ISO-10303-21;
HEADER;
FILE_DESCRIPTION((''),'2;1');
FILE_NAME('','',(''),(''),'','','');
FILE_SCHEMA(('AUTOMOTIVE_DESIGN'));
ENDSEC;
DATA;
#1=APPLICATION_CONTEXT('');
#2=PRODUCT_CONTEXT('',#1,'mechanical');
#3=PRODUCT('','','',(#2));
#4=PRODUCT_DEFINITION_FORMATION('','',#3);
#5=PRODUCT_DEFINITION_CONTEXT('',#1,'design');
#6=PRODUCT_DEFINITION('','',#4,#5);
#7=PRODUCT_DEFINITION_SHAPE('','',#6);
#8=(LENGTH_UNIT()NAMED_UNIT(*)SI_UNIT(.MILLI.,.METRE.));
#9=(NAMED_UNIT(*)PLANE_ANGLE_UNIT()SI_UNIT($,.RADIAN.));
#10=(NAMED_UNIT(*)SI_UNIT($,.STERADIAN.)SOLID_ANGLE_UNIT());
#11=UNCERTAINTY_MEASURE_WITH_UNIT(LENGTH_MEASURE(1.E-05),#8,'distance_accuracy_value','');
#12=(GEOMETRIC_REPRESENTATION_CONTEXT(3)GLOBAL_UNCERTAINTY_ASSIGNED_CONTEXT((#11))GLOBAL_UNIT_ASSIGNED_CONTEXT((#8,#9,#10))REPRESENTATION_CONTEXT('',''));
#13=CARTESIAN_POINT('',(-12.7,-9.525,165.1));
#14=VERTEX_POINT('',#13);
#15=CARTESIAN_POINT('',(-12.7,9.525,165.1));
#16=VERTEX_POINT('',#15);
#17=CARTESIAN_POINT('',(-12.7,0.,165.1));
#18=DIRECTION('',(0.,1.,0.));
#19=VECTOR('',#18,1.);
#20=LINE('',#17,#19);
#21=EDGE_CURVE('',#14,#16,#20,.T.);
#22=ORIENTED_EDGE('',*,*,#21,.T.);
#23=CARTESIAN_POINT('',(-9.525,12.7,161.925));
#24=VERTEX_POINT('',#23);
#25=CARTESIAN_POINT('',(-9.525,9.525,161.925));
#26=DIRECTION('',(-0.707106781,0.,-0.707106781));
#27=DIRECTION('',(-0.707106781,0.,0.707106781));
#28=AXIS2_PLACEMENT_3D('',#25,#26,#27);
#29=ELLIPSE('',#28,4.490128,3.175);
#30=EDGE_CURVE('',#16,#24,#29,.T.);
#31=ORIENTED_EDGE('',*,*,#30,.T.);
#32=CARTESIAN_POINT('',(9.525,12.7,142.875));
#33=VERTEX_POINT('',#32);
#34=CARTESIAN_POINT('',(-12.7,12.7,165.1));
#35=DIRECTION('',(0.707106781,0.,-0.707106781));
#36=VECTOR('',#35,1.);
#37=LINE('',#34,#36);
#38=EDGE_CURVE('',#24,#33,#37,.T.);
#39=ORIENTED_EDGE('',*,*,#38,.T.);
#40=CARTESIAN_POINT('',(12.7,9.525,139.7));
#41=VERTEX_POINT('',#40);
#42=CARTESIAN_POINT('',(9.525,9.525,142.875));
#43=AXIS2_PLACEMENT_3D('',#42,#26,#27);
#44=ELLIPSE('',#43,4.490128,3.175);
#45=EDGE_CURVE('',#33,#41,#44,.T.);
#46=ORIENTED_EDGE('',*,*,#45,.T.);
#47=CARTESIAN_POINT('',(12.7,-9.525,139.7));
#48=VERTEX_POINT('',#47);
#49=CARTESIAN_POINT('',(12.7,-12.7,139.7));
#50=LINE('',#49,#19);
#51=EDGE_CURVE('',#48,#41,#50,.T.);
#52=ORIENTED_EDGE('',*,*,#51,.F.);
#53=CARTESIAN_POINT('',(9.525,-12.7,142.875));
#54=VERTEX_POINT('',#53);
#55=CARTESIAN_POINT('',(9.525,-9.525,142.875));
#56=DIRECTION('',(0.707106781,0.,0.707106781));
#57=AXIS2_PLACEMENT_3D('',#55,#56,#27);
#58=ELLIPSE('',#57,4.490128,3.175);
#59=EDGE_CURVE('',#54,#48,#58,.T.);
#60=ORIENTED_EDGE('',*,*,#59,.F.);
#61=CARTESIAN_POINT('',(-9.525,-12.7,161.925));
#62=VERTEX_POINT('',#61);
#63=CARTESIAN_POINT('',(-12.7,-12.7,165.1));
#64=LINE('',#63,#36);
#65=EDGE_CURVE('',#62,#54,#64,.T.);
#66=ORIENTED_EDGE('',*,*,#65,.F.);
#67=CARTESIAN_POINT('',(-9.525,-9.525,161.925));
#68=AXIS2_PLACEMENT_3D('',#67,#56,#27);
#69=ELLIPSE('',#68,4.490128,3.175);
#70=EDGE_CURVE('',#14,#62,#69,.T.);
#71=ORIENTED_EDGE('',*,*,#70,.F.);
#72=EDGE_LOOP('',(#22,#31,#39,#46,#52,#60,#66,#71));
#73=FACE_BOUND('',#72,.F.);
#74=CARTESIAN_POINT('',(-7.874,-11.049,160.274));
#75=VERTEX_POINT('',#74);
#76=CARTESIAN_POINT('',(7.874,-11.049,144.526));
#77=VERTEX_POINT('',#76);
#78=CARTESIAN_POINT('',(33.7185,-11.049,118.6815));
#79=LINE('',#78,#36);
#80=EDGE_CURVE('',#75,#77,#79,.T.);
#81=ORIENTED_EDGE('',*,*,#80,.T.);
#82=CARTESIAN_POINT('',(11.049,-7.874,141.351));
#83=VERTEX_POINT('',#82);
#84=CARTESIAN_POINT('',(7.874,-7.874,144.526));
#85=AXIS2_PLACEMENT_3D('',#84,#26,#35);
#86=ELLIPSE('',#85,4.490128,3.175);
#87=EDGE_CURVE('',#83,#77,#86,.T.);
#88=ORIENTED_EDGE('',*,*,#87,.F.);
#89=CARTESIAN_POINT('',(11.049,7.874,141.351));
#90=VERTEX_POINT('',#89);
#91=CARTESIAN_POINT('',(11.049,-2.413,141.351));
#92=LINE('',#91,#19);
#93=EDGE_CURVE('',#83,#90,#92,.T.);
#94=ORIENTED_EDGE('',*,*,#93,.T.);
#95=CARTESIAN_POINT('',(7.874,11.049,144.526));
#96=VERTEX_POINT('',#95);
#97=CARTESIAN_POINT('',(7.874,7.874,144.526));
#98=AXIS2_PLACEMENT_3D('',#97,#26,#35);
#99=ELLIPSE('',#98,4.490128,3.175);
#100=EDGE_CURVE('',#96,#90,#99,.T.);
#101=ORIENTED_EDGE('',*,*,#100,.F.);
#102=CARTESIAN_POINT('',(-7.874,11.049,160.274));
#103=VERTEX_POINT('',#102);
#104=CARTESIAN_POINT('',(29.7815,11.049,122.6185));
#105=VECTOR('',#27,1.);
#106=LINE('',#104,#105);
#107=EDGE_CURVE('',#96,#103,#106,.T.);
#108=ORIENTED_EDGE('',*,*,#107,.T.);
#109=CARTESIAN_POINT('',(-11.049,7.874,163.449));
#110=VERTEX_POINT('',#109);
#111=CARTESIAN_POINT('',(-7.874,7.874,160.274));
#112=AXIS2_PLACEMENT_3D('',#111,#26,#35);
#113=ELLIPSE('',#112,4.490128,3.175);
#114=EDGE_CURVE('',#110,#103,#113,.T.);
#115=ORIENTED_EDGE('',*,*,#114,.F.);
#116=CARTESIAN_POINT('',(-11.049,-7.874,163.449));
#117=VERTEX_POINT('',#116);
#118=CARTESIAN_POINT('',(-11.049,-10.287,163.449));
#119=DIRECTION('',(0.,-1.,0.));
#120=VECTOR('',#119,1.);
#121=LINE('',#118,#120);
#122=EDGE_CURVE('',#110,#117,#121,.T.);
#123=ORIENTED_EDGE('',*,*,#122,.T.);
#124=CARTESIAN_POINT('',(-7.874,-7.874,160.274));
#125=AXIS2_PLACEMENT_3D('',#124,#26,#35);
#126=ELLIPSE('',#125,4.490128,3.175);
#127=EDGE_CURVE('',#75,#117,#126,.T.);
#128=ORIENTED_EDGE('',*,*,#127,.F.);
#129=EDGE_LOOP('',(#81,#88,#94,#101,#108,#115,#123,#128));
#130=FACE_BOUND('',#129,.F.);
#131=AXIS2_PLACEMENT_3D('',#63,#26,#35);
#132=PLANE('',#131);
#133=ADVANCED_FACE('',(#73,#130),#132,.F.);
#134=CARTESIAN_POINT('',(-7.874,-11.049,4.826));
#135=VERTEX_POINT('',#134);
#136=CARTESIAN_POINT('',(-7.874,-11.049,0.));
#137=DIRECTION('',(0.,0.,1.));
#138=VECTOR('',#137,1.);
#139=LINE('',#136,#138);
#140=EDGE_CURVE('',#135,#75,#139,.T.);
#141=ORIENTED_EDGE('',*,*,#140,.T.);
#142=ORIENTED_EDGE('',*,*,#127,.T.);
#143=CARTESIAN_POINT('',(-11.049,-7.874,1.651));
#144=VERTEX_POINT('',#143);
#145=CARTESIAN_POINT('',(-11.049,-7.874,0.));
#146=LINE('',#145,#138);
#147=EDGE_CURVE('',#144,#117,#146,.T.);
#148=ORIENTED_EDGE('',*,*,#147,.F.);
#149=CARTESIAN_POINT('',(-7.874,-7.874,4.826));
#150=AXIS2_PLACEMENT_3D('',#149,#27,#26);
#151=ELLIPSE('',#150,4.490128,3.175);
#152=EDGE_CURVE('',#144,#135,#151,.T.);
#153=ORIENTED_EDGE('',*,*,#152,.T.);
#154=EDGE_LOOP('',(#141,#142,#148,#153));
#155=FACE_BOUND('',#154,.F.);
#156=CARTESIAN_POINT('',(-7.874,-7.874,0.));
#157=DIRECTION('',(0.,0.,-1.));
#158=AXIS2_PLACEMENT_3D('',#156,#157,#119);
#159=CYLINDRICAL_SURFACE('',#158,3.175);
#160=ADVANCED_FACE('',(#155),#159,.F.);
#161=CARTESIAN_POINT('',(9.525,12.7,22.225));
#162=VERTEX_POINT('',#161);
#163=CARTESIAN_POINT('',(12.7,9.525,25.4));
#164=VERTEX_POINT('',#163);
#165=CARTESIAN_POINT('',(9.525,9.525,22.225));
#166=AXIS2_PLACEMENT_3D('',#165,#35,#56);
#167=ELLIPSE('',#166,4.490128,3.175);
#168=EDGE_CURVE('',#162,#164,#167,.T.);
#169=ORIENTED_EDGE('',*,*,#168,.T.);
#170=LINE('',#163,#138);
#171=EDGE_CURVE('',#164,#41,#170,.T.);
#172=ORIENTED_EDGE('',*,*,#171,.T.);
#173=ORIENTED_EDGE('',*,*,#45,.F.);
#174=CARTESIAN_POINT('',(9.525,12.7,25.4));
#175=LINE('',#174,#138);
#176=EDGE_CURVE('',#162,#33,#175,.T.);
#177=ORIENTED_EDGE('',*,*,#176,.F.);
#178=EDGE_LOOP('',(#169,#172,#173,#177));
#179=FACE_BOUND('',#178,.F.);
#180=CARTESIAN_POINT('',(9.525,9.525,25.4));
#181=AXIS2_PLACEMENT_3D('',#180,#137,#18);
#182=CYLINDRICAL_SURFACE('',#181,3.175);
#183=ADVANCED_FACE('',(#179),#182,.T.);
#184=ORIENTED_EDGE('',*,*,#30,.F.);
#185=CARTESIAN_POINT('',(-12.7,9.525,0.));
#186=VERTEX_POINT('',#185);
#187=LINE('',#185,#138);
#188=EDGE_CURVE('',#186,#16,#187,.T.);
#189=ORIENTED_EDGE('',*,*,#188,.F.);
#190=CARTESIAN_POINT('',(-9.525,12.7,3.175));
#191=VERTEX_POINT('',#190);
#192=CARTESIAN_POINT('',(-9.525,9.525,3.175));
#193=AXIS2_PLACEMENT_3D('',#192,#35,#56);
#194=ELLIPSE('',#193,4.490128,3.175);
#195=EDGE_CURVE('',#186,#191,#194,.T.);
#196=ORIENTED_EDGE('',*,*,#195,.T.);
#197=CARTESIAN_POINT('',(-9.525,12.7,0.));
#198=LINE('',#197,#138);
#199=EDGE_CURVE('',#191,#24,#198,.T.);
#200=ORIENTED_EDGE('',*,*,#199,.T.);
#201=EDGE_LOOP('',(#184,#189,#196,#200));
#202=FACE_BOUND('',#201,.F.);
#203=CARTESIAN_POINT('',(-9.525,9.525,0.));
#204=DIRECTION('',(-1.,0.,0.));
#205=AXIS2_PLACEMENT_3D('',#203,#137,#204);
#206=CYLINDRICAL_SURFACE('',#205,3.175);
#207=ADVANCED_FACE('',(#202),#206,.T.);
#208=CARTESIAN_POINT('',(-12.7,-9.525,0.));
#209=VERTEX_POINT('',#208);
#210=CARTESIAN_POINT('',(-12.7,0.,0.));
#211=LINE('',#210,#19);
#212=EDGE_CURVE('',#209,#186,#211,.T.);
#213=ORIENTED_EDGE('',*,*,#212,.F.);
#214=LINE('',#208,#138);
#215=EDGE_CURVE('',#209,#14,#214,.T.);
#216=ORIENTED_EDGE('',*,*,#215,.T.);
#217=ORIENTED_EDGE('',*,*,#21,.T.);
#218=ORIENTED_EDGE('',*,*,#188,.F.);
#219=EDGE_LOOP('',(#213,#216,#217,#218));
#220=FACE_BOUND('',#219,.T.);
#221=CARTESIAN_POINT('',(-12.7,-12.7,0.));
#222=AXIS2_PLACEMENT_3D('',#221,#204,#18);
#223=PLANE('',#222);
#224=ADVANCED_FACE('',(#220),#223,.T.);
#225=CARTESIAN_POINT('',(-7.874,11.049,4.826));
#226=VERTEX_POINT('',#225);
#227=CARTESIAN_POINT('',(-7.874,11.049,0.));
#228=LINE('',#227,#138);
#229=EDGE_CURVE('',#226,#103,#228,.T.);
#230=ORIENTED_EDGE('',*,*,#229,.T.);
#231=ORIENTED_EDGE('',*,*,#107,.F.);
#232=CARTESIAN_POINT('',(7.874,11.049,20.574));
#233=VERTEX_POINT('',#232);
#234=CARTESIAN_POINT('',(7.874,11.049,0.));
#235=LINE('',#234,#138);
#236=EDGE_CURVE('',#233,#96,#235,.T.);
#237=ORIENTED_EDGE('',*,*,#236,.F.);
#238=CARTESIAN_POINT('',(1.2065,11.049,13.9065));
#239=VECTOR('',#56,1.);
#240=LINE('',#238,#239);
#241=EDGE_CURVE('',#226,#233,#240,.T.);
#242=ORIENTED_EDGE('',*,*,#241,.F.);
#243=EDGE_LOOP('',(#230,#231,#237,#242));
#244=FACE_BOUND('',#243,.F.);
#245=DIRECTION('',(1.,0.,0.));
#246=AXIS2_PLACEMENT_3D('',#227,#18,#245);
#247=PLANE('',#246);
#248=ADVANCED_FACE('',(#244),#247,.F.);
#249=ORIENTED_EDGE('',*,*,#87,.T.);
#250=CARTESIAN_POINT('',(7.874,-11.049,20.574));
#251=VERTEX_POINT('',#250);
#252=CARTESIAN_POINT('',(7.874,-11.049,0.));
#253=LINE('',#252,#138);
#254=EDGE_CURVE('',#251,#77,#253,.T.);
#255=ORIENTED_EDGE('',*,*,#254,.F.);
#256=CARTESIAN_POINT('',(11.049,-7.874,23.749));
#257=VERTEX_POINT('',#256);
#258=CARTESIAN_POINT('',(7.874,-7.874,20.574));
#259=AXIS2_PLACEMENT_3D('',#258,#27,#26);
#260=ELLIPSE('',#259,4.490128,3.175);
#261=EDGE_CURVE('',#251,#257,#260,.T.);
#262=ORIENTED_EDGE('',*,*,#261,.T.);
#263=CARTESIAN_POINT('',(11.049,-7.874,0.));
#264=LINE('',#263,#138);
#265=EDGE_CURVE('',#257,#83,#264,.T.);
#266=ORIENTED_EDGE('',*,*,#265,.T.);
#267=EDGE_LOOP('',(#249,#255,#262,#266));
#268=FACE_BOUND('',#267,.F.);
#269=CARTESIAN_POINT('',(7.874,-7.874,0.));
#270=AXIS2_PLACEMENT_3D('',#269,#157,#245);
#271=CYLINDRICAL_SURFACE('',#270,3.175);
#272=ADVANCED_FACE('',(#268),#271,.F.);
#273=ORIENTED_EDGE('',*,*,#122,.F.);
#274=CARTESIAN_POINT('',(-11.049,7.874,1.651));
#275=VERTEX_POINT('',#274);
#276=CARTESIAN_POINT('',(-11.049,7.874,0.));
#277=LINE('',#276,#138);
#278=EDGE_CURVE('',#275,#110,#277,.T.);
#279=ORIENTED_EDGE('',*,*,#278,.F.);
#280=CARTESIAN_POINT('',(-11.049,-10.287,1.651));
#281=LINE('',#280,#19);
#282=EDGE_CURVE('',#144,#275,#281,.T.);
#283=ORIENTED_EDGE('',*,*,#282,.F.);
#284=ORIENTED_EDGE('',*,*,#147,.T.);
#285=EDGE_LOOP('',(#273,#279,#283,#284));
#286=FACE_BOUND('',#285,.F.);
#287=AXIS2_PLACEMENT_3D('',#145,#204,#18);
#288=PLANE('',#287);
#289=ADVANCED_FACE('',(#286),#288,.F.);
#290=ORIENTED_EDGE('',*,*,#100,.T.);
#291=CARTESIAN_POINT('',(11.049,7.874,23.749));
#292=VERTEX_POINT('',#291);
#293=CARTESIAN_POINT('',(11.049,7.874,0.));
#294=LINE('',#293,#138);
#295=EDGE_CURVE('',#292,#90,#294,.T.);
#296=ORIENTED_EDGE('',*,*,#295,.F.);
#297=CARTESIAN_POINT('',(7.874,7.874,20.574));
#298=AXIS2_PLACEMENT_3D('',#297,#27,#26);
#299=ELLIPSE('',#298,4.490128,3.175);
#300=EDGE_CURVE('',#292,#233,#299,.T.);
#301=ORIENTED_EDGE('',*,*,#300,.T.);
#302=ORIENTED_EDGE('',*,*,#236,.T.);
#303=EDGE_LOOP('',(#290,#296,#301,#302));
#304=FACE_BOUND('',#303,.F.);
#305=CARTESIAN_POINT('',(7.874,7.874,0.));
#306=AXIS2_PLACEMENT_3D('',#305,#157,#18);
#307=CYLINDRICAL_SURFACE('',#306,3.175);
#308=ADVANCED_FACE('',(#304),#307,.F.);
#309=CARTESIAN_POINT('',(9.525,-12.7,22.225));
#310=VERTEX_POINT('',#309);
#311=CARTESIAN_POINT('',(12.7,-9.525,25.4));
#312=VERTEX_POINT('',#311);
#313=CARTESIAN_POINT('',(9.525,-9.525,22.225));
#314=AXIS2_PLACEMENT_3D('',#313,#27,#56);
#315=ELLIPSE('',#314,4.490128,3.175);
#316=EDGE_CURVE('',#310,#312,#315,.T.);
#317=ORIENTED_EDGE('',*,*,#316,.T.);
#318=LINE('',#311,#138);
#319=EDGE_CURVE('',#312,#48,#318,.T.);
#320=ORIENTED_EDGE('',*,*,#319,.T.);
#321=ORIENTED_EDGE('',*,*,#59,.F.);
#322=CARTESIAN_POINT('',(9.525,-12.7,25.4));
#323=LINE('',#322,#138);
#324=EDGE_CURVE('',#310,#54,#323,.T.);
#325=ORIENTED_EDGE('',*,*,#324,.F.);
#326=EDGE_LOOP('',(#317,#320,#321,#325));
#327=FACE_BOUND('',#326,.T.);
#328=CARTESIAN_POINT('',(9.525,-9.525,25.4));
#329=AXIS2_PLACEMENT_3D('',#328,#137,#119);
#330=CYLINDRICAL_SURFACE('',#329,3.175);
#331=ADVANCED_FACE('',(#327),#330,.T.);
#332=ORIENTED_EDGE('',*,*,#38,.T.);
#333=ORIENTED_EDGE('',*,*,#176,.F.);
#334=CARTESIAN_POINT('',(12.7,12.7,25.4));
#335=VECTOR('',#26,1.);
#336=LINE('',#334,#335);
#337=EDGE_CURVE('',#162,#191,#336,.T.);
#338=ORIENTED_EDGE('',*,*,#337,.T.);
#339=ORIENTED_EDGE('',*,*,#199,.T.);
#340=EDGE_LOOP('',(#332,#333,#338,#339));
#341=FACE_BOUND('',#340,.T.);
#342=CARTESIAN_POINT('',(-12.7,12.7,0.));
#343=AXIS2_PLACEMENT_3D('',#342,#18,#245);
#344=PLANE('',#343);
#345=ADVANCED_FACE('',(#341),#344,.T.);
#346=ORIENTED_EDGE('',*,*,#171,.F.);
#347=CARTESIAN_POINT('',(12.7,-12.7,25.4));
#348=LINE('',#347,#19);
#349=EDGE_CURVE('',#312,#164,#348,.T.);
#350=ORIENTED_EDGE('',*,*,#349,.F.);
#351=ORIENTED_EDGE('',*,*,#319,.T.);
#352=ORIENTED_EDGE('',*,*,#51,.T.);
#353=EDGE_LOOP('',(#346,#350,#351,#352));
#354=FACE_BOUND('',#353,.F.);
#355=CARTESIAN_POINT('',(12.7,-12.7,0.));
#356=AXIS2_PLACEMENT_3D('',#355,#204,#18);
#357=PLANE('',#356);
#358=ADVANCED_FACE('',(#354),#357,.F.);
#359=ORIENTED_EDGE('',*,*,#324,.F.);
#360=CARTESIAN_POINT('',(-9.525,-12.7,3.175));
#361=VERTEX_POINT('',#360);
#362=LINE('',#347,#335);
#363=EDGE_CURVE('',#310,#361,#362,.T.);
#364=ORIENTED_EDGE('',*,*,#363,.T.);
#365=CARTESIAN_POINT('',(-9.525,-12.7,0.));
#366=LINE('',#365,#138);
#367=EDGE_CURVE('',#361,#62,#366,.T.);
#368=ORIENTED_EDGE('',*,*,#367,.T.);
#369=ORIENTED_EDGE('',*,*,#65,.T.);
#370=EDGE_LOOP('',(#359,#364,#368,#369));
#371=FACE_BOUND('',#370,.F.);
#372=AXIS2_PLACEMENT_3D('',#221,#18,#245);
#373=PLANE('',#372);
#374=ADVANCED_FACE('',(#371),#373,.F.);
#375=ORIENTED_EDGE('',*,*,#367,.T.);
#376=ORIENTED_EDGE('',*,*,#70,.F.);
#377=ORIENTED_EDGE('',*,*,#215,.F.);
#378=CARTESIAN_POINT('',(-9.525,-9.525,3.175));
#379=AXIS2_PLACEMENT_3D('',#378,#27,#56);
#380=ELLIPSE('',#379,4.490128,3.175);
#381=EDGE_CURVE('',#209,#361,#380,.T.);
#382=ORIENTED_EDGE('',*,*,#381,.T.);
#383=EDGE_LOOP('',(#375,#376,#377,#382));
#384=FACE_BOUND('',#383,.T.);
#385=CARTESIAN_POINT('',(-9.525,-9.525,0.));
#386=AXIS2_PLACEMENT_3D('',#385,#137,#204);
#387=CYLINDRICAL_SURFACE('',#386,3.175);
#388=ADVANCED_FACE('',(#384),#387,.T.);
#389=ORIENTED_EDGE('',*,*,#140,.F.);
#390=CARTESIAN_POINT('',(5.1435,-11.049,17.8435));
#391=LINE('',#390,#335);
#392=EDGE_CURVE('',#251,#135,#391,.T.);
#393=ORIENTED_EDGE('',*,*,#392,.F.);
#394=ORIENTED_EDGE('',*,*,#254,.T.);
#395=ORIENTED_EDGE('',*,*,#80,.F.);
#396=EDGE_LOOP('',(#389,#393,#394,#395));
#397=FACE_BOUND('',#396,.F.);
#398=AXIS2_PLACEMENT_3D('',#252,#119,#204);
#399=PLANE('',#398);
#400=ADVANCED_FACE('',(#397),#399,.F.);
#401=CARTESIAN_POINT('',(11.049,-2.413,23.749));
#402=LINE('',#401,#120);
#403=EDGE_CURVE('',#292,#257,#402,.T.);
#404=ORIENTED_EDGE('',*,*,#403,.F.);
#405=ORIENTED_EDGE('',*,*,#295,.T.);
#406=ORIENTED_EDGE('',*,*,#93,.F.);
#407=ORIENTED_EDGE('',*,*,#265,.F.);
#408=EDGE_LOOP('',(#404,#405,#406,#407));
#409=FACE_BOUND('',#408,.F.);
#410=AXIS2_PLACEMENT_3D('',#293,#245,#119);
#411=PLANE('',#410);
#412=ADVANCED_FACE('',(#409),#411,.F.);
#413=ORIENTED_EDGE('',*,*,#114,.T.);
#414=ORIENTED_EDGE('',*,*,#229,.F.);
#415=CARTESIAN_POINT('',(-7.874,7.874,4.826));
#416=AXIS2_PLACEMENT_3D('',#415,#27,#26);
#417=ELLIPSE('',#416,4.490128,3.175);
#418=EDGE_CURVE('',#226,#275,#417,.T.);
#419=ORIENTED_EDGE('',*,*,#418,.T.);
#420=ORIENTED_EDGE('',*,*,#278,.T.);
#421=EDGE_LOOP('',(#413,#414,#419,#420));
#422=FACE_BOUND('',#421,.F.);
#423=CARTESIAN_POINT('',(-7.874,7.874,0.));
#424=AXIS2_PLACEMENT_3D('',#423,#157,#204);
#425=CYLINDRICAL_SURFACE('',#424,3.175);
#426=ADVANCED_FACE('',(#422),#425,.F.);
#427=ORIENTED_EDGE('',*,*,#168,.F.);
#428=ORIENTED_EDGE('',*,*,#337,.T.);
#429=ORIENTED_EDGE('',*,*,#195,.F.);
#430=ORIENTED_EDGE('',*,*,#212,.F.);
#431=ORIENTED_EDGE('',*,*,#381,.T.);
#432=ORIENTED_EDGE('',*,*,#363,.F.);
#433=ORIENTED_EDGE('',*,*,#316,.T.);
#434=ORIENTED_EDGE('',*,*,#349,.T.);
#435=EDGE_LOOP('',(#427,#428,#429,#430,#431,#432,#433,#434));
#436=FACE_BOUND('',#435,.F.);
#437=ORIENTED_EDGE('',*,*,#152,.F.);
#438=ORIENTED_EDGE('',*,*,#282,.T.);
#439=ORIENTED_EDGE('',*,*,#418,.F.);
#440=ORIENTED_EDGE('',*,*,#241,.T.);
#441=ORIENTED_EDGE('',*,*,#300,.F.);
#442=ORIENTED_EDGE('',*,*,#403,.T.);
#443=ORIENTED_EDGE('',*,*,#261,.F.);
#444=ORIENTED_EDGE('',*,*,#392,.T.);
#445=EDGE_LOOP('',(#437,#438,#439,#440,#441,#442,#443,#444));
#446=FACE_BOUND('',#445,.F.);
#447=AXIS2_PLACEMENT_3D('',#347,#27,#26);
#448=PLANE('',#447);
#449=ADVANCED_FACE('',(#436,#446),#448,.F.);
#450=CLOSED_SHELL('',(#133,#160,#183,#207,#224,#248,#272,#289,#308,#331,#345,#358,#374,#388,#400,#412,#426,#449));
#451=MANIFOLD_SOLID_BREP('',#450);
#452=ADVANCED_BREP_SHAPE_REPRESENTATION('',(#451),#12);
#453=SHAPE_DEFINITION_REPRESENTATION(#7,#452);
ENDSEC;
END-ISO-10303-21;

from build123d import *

# Parameters (mm, degrees)
F1_W     = 25.4
F1_H     = 25.4
F2_DEPTH = 165.1
F4_DEPTH = 25.4
F5_R     = 3.175


# Not quite as in the source:
# - a variable given as a bare number and used for a length is read in inches; the dataset says mm whatever the document's units were


with BuildPart() as f2:
    # F1 (on Top) → F2 (new body)
    with BuildSketch(Plane.XY):
        Rectangle(F1_W, F1_H)
        with BuildLine():
            ThreePointArc((-11.049, 7.874), (-10.1190640303, 10.1190640303), (-7.874, 11.049))
            Line((-7.874, 11.049), (7.874, 11.049))
            ThreePointArc((7.874, 11.049), (10.1190640303, 10.1190640303), (11.049, 7.874))
            Line((11.049, 7.874), (11.049, -7.874))
            ThreePointArc((11.049, -7.874), (10.1190640303, -10.1190640303), (7.874, -11.049))
            Line((7.874, -11.049), (-7.874, -11.049))
            ThreePointArc((-7.874, -11.049), (-10.1190640303, -10.1190640303), (-11.049, -7.874))
            Line((-11.049, -7.874), (-11.049, 7.874))
        make_face(mode=Mode.SUBTRACT)
    extrude(amount=F2_DEPTH)

    # F3 (on face) → F4 (cut)
    with BuildSketch(Plane.XZ.offset(12.7)):
        Polygon((12.7, 25.4), (-12.7, 0), (12.7, 0), align=None)
        Polygon((12.7, 165.1), (-12.7, 165.1), (12.7, 139.7), align=None)
    extrude(amount=-F4_DEPTH, mode=Mode.SUBTRACT)

    # F5
    f5_edges = [f2.edges().sort_by_distance(p)[0] for p in [
        (-12.7, 12.7, 82.55),
        (12.7, 12.7, 82.55),
        (-12.7, -12.7, 82.55),
        (12.7, -12.7, 82.55),
    ]]
    fillet(f5_edges, radius=F5_R)


solid = f2.part
